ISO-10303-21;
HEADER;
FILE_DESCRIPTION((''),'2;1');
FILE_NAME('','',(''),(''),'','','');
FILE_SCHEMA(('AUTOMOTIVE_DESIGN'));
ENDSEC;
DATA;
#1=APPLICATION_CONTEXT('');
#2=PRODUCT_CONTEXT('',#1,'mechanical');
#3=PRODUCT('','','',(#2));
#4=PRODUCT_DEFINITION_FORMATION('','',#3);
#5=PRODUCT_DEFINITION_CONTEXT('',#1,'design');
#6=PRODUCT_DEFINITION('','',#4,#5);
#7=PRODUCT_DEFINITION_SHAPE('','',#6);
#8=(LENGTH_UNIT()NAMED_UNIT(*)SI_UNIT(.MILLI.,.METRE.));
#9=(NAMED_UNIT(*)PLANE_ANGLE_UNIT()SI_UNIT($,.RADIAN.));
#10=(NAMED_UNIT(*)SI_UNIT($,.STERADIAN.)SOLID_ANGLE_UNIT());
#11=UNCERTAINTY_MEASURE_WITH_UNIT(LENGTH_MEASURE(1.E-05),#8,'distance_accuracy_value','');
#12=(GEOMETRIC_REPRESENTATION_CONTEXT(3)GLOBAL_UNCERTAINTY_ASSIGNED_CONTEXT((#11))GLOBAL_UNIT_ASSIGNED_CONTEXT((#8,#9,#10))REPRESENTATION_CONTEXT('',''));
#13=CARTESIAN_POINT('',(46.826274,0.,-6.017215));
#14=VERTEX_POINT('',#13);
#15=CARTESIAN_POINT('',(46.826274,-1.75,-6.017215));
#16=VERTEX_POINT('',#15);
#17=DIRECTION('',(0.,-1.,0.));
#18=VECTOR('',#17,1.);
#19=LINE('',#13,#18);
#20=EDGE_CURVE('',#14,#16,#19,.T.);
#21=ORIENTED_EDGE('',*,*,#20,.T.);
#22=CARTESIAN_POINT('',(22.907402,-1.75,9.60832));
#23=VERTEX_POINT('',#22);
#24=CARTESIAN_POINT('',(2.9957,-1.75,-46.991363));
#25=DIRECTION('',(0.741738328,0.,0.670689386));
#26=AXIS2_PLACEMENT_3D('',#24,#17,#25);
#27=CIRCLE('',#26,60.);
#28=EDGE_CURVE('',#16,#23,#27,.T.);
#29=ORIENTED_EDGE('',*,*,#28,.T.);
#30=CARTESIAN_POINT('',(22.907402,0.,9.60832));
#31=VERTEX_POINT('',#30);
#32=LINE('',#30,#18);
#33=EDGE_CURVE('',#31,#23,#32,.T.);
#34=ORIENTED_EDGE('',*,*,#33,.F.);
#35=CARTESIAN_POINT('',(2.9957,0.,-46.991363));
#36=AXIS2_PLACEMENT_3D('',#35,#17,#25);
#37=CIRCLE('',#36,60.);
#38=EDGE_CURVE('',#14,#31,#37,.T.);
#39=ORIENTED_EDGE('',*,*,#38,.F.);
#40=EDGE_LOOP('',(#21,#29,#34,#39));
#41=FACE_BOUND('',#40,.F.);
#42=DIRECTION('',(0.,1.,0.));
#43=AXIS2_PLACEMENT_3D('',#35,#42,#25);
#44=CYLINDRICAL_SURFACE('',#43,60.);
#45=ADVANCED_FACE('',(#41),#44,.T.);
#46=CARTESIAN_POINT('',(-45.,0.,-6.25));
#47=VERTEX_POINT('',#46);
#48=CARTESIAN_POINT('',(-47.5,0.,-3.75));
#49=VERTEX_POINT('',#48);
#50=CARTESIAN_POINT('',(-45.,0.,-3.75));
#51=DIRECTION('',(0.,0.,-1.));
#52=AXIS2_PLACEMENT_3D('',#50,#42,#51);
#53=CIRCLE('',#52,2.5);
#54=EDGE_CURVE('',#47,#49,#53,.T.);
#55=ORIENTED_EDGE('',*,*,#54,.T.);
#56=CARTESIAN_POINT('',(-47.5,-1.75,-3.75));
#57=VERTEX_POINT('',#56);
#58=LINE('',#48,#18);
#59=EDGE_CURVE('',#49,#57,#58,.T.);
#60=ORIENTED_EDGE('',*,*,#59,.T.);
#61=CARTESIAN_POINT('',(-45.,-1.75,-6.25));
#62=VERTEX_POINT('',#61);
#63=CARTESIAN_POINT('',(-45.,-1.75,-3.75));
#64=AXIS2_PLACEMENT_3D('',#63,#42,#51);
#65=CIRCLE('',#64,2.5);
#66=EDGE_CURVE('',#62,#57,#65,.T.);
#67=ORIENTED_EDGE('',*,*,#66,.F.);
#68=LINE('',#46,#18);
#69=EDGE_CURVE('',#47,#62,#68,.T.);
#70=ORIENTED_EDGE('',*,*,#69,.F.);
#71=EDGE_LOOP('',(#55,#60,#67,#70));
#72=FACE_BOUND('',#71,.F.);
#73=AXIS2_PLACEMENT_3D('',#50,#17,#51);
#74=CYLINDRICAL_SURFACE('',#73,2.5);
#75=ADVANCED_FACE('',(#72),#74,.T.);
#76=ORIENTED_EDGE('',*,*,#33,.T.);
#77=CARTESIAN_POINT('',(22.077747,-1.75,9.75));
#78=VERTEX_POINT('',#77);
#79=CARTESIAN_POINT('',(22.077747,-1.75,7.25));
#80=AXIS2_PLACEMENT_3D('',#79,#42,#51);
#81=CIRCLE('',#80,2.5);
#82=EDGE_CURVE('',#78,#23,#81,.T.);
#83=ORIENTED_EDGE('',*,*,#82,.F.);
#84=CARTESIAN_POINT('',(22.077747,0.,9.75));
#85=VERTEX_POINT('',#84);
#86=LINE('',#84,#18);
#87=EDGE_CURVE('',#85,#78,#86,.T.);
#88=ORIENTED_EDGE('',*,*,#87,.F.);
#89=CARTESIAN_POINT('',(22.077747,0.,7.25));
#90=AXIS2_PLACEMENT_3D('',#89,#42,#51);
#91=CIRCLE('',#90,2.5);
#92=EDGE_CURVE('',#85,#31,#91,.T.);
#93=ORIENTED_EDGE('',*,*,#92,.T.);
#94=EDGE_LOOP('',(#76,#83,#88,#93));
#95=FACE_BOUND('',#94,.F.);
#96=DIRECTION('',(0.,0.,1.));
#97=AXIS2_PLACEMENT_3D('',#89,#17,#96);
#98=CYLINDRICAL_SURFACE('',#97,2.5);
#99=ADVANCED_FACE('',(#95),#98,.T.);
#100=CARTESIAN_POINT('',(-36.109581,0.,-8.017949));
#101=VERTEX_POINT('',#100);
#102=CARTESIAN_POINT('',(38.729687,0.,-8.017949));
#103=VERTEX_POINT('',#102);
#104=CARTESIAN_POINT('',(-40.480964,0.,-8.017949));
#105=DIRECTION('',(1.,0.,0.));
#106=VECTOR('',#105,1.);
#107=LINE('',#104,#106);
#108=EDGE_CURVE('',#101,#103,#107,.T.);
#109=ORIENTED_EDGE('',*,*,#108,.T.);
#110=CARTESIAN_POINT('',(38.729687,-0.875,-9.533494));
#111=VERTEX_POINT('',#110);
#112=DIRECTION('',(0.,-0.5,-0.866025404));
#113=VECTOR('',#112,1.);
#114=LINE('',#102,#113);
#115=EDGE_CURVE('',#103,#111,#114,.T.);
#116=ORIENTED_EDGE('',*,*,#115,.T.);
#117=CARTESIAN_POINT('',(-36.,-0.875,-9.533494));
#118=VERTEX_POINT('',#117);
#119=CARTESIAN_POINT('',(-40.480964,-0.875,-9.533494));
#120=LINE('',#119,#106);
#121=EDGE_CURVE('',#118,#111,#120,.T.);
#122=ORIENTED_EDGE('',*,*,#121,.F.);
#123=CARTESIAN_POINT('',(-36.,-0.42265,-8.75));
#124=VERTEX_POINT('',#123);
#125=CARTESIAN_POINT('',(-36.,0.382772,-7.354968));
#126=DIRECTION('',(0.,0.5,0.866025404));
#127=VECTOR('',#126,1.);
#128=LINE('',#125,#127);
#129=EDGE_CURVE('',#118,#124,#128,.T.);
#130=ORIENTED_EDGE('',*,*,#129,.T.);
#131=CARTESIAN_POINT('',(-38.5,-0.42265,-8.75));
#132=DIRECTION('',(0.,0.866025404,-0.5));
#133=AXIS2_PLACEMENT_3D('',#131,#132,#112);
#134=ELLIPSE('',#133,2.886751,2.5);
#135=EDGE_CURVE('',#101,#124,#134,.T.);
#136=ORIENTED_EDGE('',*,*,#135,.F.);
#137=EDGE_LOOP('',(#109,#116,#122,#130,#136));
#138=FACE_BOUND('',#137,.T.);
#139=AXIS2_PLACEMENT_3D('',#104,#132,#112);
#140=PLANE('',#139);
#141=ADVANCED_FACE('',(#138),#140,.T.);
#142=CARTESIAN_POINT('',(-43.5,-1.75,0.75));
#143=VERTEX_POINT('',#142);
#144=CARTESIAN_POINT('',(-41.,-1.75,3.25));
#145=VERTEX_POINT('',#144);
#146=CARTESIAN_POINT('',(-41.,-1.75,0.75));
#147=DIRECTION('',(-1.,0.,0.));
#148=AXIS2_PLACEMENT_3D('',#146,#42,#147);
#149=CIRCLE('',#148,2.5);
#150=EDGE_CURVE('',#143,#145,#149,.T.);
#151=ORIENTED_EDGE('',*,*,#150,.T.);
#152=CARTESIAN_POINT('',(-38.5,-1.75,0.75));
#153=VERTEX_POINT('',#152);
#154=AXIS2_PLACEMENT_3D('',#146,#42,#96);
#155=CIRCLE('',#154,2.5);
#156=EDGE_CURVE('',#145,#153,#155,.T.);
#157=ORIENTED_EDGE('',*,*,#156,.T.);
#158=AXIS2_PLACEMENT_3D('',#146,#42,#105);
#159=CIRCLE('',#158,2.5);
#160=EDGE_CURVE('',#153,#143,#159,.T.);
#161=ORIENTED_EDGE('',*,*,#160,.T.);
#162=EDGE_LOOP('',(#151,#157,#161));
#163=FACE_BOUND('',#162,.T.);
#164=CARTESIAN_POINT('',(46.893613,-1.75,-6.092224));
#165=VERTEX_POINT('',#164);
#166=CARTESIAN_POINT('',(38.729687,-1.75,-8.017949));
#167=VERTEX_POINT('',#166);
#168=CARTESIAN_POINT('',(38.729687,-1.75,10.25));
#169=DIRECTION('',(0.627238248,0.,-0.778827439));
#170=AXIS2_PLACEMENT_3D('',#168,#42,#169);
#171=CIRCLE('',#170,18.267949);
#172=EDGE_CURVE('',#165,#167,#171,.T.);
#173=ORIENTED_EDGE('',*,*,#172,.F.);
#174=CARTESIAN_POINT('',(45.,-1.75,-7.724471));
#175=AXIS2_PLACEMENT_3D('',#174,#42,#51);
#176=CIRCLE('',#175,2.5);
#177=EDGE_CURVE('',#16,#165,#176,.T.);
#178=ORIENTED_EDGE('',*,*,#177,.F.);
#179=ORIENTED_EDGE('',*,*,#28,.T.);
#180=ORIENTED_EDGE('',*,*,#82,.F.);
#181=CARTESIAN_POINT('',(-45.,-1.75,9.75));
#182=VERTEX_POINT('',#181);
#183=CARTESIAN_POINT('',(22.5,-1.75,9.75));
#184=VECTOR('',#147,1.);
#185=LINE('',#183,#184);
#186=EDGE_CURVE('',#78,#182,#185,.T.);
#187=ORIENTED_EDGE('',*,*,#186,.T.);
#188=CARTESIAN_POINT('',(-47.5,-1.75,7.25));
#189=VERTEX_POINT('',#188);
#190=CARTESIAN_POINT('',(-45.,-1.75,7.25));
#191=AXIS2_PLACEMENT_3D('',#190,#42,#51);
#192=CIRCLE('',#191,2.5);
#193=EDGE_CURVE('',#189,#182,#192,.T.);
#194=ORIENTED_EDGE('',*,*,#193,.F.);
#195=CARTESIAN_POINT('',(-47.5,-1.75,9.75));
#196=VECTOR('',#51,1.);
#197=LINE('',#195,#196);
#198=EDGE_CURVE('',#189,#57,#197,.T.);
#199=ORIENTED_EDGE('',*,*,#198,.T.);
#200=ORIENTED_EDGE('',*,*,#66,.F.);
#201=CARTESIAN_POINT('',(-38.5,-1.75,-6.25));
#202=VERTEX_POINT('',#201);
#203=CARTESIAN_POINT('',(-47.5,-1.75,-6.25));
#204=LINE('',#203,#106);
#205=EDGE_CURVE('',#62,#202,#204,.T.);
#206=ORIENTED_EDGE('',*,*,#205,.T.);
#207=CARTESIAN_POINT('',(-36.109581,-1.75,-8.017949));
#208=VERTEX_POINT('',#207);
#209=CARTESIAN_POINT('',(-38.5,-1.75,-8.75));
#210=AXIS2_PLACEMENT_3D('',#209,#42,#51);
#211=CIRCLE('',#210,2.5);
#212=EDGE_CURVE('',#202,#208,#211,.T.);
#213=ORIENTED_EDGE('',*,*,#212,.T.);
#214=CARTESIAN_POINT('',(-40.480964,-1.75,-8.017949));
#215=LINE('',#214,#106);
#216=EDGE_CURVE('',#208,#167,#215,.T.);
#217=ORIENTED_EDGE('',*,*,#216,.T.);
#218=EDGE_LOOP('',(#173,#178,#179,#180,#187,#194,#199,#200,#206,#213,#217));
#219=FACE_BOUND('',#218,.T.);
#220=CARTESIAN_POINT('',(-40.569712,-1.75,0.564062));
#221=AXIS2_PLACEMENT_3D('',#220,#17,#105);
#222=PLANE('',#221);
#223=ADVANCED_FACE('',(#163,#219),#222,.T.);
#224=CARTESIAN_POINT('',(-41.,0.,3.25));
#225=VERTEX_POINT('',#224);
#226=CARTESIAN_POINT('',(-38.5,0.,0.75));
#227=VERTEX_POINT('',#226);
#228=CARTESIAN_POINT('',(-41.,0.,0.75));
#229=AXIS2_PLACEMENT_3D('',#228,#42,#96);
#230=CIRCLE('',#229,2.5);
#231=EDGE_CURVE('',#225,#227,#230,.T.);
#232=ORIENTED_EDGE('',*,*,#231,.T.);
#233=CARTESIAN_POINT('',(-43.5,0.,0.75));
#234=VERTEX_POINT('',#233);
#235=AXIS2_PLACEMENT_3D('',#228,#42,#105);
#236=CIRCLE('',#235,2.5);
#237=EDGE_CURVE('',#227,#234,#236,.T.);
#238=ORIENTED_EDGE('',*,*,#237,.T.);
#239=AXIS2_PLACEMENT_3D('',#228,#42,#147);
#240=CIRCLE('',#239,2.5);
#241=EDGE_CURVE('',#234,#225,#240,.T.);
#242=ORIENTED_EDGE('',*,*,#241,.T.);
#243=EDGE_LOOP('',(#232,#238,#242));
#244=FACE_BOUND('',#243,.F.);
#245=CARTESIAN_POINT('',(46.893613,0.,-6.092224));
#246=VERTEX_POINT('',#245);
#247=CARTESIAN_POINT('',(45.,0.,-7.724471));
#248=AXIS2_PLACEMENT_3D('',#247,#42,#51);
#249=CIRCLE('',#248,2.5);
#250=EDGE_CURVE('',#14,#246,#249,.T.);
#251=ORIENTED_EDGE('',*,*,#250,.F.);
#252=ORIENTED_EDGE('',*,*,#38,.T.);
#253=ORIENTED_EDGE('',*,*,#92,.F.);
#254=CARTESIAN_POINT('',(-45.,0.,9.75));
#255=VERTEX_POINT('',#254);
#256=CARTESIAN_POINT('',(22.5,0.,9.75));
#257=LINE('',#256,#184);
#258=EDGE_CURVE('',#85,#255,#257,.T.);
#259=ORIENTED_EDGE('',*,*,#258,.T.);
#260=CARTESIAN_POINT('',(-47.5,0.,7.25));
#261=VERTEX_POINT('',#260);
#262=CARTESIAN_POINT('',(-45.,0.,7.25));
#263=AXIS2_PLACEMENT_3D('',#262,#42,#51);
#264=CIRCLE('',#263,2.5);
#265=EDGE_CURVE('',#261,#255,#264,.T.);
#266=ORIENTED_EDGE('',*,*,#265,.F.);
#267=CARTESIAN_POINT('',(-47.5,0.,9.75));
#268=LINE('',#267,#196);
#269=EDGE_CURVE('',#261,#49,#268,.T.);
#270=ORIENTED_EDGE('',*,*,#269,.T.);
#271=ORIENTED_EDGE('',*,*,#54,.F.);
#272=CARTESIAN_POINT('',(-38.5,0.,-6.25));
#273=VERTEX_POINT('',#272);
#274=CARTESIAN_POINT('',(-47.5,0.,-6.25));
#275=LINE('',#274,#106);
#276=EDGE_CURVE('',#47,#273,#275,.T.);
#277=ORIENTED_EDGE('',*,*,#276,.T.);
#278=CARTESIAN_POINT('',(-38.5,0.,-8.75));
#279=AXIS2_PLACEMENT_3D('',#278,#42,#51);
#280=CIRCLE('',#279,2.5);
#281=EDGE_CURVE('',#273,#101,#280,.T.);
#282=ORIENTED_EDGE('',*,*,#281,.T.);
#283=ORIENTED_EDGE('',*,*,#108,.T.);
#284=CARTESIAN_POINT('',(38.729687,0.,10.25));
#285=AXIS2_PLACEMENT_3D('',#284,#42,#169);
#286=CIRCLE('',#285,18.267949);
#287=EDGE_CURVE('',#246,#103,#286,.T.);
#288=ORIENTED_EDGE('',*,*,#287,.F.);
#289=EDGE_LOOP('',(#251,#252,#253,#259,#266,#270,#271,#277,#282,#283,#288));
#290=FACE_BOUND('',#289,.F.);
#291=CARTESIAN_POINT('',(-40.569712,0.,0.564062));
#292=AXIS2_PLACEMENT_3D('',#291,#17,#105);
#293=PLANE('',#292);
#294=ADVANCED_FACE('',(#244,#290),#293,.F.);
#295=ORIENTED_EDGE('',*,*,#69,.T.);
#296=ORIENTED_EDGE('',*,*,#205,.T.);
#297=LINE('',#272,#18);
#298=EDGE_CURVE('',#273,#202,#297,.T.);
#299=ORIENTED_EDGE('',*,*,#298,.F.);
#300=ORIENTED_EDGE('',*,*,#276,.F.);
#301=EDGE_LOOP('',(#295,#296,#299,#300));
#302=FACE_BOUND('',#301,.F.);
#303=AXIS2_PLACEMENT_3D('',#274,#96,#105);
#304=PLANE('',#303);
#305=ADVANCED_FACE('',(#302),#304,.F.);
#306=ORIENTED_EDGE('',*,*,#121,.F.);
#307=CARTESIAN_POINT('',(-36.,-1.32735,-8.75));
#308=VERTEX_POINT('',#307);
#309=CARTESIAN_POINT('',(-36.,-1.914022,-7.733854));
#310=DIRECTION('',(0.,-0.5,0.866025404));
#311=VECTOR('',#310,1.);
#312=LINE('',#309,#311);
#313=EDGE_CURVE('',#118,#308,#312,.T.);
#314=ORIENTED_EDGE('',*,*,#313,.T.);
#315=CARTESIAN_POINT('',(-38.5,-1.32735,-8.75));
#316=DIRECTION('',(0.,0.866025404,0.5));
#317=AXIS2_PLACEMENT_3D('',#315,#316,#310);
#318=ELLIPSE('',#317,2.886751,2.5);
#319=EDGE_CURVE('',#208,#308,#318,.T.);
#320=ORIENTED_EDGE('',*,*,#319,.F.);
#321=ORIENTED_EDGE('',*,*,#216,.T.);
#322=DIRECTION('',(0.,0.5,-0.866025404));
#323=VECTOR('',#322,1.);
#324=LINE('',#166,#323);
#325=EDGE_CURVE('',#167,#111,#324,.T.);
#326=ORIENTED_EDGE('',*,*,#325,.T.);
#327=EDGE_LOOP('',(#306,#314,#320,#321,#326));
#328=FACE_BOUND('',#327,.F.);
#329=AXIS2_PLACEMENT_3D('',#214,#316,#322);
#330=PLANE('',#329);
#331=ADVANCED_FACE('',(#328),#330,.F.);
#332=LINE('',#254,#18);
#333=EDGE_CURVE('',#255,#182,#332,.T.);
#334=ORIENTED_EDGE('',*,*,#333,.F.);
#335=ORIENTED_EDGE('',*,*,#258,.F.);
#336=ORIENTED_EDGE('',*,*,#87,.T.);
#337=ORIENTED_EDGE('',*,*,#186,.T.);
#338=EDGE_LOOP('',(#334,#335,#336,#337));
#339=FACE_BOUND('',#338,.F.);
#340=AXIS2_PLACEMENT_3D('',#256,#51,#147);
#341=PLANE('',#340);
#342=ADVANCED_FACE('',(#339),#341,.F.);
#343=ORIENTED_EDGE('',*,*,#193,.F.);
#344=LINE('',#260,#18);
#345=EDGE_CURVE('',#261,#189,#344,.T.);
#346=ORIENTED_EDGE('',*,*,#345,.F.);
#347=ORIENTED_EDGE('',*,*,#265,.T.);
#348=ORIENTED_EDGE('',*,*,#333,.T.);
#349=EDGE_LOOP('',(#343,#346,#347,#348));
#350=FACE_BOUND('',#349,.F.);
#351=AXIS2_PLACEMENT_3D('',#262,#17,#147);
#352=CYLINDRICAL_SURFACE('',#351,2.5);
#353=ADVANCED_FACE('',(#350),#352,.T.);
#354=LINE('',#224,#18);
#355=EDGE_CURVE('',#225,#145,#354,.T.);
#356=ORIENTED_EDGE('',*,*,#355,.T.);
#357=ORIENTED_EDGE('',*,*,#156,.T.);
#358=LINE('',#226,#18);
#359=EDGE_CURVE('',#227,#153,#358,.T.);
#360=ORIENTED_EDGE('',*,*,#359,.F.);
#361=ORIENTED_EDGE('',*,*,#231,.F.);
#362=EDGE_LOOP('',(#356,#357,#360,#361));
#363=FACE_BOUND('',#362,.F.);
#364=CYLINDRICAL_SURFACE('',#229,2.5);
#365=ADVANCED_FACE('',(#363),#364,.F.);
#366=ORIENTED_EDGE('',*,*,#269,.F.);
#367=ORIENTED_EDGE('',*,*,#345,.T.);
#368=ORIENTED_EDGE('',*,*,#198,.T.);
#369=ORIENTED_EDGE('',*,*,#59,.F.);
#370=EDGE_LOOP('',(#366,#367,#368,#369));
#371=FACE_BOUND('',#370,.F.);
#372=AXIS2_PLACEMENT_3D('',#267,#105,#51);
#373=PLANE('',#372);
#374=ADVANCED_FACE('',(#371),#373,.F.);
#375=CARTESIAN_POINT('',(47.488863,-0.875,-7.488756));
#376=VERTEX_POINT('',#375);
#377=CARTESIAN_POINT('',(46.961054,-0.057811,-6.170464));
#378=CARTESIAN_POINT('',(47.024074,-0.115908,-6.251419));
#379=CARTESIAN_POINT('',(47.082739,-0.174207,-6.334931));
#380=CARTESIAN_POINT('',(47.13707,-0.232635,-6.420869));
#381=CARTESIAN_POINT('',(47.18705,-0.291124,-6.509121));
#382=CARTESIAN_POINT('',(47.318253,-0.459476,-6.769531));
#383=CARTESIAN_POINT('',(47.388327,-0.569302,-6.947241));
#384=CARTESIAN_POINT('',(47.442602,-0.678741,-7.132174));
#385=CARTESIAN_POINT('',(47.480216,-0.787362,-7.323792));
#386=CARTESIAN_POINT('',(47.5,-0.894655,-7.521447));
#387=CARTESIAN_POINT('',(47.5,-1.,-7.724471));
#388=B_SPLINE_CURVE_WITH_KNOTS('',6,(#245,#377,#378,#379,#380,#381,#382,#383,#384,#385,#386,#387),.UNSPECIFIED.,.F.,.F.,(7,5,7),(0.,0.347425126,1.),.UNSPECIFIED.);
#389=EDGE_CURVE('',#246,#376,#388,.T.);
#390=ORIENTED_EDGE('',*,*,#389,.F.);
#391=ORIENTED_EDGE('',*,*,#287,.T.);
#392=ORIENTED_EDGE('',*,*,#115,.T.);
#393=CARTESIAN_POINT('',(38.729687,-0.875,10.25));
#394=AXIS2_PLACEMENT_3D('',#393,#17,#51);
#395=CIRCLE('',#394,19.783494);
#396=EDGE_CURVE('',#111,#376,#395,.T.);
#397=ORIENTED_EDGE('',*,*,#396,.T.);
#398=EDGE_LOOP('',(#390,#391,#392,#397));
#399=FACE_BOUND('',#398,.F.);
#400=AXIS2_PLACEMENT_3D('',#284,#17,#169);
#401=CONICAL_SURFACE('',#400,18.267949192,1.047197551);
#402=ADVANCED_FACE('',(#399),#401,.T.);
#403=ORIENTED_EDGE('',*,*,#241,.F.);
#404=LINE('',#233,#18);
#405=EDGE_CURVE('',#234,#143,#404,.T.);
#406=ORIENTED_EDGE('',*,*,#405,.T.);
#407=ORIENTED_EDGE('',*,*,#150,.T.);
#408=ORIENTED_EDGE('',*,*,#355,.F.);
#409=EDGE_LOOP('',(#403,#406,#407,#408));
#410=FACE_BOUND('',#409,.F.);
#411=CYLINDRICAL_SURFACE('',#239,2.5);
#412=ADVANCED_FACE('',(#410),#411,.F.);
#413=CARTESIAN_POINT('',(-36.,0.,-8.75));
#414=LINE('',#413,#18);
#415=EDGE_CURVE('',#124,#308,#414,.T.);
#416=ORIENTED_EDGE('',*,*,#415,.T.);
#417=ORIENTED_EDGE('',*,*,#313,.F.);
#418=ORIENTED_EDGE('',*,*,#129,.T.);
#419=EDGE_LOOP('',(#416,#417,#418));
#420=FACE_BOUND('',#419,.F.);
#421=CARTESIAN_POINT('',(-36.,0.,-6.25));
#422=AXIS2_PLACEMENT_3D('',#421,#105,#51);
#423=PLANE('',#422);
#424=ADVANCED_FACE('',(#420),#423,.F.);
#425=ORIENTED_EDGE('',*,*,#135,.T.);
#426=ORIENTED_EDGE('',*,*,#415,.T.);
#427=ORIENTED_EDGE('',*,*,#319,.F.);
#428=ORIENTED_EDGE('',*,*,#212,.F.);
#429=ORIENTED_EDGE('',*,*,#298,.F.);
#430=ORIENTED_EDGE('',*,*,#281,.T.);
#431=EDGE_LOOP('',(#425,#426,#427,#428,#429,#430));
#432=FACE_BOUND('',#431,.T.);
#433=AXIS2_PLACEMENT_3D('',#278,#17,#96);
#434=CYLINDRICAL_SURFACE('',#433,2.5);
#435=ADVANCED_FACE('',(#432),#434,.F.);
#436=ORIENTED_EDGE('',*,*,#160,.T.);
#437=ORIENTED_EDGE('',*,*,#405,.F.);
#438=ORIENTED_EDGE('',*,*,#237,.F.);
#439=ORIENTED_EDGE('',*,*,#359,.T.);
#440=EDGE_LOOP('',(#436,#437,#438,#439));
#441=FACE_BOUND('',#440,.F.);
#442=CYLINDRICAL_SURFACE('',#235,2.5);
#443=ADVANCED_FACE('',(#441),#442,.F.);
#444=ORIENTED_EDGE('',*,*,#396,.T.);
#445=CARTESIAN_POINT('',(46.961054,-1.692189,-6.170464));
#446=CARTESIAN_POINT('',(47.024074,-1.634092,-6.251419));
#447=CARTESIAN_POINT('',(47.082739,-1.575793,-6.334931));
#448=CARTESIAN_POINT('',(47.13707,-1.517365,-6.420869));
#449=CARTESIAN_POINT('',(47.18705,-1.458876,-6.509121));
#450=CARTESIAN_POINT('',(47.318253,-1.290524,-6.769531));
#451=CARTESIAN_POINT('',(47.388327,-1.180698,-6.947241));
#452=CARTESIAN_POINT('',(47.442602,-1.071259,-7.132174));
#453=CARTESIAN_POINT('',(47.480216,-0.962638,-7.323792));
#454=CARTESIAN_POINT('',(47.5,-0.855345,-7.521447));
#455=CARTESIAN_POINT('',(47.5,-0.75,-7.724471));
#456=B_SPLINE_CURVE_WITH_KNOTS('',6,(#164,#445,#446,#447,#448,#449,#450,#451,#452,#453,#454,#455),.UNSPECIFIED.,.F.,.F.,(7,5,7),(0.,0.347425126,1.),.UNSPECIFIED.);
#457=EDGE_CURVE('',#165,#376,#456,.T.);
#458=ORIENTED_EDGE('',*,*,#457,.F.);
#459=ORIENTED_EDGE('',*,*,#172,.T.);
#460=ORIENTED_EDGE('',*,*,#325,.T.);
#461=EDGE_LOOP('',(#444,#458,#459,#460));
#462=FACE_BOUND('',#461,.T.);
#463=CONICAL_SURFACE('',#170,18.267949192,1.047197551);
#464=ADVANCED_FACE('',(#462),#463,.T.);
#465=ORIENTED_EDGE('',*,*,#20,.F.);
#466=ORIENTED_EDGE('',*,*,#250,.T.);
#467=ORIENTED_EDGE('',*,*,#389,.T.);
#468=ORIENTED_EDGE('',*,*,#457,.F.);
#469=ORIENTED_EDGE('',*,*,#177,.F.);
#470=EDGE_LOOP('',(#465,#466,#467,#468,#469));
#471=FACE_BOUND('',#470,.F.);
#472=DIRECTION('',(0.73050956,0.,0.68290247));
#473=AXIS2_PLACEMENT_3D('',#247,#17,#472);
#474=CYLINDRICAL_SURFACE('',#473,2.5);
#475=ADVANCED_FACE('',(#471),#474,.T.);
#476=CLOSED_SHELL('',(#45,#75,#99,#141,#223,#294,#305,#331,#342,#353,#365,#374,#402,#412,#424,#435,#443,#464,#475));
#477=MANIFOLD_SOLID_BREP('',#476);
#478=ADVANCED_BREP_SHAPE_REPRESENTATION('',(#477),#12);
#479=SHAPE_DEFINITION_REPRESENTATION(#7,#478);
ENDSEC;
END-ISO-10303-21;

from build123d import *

# Parameters (mm, degrees)
F1_DEPTH    = 1.75
F2_F1_R     = 2.5
F2_F2_R     = 2.5
F3_T1_DEPTH = 45.6015639847
F4_T1_DEPTH = 79.2106511737
F4_T4_ANGLE = 38.8466581594
F4_T6_ANGLE = 38.8466581594


# Not quite as in the source:
# - a fillet or chamfer that OpenCascade refuses, or shapes differently, is made with other operations: its cross-section is extruded or revolved along the edge and cut away or added


with BuildPart() as f1:
    # F0 (on Front) → F1 (new body)
    with BuildSketch(Plane.XZ):
        with BuildLine():
            Line((-47.5, -6.25), (-36, -6.25))
            Line((-36, -6.25), (-36, 9.75))
            Line((-36, 9.75), (-41, 9.75))
            Line((-41, 9.75), (-41, 3.25))
            ThreePointArc((-41, 3.25), (-39.232233047, 2.517766953), (-38.5, 0.75))
            ThreePointArc((-38.5, 0.75), (-41, -1.75), (-43.5, 0.75))
            Line((-43.5, 0.75), (-47.5, 0.75))
            Line((-47.5, 0.75), (-47.5, -6.25))
        make_face()
        with BuildLine():
            Line((-36, -9.75), (47.5, -9.75))
            Line((47.5, -9.75), (47.5, -6.75))
            ThreePointArc((47.5, -6.75), (36.0462328118, 3.08520123), (22.5, 9.75))
            Line((22.5, 9.75), (-36, 9.75))
            Line((-36, 9.75), (-36, -6.25))
            Line((-36, -6.25), (-36, -9.75))
        make_face()
        with BuildLine():
            Line((-47.5, 9.75), (-47.5, 0.75))
            Line((-47.5, 0.75), (-43.5, 0.75))
            ThreePointArc((-43.5, 0.75), (-42.767766953, 2.517766953), (-41, 3.25))
            Line((-41, 3.25), (-41, 9.75))
            Line((-41, 9.75), (-47.5, 9.75))
        make_face()
    extrude(amount=F1_DEPTH)

    # F2: fillet of radius 2.5 on 5 edges, made by hand

    # F2_f1
    f2_f1_edges = [f1.edges().sort_by_distance(p)[0] for p in [
        (-36, -0.875, -6.25),
    ]]
    fillet(f2_f1_edges, radius=F2_F1_R)

    # F2_f2
    f2_f2_edges = [f1.edges().sort_by_distance(p)[0] for p in [
        (-47.5, -0.875, -6.25),
        (-47.5, -0.875, 9.75),
        (22.5, -0.875, 9.75),
        (47.5, -0.875, -6.75),
    ]]
    fillet(f2_f2_edges, radius=F2_F2_R)

    # F3: fillet of radius 20 on 1 edges, made by hand

    # F3_s2 → F3_t1 (cut)
    with BuildSketch(Plane.XZ.offset(-21.9257819924)):
        with BuildLine():
            ThreePointArc((38.7296872031, -9.75), (43.2302747659, -9.2370395799), (47.5, -7.7244711589))
            Line((47.5, -7.7244711589), (47.5, -9.75))
            Line((47.5, -9.75), (38.7296872031, -9.75))
        make_face()
    extrude(amount=F3_T1_DEPTH, mode=Mode.SUBTRACT)

    # F4: chamfer of 1 x 1.7320508076 on 4 edges, made by hand

    # F4_s2 → F4_t1 (cut)
    with BuildSketch(Plane.YZ.offset(-40.4809639706)):
        Polygon((-1.75, -8.0179491924), (-0.75, -9.75), (-1.75, -9.75), align=None)
        Polygon((0, -8.0179491924), (-1, -9.75), (0, -9.75), align=None)
    extrude(amount=F4_T1_DEPTH, mode=Mode.SUBTRACT)

    # F4_s3 → F4_t4 (revolve, cut)
    with BuildSketch(Plane(origin=(28.4995819615, 0, 22.9524885444), x_dir=(0, 1, 0), z_dir=(0.778827439, 0, 0.6272382484))):
        Polygon((0, -34.577709107), (-1, -36.3097599146), (0, -36.3097599146), align=None)
    revolve(axis=Axis((38.729687203, 0, 10.2499999998), (0, 1, 0)), revolution_arc=F4_T4_ANGLE, mode=Mode.SUBTRACT)

    # F4_s5 → F4_t6 (revolve, cut)
    with BuildSketch(Plane(origin=(28.4995819615, 0, 22.9524885444), x_dir=(0, 1, 0), z_dir=(0.778827439, 0, 0.6272382484))):
        Polygon((-1.75, -34.577709107), (-0.75, -36.3097599146), (-1.75, -36.3097599146), align=None)
    revolve(axis=Axis((38.729687203, -1.75, 10.2499999998), (0, 1, 0)), revolution_arc=F4_T6_ANGLE, mode=Mode.SUBTRACT)


solid = f1.part
